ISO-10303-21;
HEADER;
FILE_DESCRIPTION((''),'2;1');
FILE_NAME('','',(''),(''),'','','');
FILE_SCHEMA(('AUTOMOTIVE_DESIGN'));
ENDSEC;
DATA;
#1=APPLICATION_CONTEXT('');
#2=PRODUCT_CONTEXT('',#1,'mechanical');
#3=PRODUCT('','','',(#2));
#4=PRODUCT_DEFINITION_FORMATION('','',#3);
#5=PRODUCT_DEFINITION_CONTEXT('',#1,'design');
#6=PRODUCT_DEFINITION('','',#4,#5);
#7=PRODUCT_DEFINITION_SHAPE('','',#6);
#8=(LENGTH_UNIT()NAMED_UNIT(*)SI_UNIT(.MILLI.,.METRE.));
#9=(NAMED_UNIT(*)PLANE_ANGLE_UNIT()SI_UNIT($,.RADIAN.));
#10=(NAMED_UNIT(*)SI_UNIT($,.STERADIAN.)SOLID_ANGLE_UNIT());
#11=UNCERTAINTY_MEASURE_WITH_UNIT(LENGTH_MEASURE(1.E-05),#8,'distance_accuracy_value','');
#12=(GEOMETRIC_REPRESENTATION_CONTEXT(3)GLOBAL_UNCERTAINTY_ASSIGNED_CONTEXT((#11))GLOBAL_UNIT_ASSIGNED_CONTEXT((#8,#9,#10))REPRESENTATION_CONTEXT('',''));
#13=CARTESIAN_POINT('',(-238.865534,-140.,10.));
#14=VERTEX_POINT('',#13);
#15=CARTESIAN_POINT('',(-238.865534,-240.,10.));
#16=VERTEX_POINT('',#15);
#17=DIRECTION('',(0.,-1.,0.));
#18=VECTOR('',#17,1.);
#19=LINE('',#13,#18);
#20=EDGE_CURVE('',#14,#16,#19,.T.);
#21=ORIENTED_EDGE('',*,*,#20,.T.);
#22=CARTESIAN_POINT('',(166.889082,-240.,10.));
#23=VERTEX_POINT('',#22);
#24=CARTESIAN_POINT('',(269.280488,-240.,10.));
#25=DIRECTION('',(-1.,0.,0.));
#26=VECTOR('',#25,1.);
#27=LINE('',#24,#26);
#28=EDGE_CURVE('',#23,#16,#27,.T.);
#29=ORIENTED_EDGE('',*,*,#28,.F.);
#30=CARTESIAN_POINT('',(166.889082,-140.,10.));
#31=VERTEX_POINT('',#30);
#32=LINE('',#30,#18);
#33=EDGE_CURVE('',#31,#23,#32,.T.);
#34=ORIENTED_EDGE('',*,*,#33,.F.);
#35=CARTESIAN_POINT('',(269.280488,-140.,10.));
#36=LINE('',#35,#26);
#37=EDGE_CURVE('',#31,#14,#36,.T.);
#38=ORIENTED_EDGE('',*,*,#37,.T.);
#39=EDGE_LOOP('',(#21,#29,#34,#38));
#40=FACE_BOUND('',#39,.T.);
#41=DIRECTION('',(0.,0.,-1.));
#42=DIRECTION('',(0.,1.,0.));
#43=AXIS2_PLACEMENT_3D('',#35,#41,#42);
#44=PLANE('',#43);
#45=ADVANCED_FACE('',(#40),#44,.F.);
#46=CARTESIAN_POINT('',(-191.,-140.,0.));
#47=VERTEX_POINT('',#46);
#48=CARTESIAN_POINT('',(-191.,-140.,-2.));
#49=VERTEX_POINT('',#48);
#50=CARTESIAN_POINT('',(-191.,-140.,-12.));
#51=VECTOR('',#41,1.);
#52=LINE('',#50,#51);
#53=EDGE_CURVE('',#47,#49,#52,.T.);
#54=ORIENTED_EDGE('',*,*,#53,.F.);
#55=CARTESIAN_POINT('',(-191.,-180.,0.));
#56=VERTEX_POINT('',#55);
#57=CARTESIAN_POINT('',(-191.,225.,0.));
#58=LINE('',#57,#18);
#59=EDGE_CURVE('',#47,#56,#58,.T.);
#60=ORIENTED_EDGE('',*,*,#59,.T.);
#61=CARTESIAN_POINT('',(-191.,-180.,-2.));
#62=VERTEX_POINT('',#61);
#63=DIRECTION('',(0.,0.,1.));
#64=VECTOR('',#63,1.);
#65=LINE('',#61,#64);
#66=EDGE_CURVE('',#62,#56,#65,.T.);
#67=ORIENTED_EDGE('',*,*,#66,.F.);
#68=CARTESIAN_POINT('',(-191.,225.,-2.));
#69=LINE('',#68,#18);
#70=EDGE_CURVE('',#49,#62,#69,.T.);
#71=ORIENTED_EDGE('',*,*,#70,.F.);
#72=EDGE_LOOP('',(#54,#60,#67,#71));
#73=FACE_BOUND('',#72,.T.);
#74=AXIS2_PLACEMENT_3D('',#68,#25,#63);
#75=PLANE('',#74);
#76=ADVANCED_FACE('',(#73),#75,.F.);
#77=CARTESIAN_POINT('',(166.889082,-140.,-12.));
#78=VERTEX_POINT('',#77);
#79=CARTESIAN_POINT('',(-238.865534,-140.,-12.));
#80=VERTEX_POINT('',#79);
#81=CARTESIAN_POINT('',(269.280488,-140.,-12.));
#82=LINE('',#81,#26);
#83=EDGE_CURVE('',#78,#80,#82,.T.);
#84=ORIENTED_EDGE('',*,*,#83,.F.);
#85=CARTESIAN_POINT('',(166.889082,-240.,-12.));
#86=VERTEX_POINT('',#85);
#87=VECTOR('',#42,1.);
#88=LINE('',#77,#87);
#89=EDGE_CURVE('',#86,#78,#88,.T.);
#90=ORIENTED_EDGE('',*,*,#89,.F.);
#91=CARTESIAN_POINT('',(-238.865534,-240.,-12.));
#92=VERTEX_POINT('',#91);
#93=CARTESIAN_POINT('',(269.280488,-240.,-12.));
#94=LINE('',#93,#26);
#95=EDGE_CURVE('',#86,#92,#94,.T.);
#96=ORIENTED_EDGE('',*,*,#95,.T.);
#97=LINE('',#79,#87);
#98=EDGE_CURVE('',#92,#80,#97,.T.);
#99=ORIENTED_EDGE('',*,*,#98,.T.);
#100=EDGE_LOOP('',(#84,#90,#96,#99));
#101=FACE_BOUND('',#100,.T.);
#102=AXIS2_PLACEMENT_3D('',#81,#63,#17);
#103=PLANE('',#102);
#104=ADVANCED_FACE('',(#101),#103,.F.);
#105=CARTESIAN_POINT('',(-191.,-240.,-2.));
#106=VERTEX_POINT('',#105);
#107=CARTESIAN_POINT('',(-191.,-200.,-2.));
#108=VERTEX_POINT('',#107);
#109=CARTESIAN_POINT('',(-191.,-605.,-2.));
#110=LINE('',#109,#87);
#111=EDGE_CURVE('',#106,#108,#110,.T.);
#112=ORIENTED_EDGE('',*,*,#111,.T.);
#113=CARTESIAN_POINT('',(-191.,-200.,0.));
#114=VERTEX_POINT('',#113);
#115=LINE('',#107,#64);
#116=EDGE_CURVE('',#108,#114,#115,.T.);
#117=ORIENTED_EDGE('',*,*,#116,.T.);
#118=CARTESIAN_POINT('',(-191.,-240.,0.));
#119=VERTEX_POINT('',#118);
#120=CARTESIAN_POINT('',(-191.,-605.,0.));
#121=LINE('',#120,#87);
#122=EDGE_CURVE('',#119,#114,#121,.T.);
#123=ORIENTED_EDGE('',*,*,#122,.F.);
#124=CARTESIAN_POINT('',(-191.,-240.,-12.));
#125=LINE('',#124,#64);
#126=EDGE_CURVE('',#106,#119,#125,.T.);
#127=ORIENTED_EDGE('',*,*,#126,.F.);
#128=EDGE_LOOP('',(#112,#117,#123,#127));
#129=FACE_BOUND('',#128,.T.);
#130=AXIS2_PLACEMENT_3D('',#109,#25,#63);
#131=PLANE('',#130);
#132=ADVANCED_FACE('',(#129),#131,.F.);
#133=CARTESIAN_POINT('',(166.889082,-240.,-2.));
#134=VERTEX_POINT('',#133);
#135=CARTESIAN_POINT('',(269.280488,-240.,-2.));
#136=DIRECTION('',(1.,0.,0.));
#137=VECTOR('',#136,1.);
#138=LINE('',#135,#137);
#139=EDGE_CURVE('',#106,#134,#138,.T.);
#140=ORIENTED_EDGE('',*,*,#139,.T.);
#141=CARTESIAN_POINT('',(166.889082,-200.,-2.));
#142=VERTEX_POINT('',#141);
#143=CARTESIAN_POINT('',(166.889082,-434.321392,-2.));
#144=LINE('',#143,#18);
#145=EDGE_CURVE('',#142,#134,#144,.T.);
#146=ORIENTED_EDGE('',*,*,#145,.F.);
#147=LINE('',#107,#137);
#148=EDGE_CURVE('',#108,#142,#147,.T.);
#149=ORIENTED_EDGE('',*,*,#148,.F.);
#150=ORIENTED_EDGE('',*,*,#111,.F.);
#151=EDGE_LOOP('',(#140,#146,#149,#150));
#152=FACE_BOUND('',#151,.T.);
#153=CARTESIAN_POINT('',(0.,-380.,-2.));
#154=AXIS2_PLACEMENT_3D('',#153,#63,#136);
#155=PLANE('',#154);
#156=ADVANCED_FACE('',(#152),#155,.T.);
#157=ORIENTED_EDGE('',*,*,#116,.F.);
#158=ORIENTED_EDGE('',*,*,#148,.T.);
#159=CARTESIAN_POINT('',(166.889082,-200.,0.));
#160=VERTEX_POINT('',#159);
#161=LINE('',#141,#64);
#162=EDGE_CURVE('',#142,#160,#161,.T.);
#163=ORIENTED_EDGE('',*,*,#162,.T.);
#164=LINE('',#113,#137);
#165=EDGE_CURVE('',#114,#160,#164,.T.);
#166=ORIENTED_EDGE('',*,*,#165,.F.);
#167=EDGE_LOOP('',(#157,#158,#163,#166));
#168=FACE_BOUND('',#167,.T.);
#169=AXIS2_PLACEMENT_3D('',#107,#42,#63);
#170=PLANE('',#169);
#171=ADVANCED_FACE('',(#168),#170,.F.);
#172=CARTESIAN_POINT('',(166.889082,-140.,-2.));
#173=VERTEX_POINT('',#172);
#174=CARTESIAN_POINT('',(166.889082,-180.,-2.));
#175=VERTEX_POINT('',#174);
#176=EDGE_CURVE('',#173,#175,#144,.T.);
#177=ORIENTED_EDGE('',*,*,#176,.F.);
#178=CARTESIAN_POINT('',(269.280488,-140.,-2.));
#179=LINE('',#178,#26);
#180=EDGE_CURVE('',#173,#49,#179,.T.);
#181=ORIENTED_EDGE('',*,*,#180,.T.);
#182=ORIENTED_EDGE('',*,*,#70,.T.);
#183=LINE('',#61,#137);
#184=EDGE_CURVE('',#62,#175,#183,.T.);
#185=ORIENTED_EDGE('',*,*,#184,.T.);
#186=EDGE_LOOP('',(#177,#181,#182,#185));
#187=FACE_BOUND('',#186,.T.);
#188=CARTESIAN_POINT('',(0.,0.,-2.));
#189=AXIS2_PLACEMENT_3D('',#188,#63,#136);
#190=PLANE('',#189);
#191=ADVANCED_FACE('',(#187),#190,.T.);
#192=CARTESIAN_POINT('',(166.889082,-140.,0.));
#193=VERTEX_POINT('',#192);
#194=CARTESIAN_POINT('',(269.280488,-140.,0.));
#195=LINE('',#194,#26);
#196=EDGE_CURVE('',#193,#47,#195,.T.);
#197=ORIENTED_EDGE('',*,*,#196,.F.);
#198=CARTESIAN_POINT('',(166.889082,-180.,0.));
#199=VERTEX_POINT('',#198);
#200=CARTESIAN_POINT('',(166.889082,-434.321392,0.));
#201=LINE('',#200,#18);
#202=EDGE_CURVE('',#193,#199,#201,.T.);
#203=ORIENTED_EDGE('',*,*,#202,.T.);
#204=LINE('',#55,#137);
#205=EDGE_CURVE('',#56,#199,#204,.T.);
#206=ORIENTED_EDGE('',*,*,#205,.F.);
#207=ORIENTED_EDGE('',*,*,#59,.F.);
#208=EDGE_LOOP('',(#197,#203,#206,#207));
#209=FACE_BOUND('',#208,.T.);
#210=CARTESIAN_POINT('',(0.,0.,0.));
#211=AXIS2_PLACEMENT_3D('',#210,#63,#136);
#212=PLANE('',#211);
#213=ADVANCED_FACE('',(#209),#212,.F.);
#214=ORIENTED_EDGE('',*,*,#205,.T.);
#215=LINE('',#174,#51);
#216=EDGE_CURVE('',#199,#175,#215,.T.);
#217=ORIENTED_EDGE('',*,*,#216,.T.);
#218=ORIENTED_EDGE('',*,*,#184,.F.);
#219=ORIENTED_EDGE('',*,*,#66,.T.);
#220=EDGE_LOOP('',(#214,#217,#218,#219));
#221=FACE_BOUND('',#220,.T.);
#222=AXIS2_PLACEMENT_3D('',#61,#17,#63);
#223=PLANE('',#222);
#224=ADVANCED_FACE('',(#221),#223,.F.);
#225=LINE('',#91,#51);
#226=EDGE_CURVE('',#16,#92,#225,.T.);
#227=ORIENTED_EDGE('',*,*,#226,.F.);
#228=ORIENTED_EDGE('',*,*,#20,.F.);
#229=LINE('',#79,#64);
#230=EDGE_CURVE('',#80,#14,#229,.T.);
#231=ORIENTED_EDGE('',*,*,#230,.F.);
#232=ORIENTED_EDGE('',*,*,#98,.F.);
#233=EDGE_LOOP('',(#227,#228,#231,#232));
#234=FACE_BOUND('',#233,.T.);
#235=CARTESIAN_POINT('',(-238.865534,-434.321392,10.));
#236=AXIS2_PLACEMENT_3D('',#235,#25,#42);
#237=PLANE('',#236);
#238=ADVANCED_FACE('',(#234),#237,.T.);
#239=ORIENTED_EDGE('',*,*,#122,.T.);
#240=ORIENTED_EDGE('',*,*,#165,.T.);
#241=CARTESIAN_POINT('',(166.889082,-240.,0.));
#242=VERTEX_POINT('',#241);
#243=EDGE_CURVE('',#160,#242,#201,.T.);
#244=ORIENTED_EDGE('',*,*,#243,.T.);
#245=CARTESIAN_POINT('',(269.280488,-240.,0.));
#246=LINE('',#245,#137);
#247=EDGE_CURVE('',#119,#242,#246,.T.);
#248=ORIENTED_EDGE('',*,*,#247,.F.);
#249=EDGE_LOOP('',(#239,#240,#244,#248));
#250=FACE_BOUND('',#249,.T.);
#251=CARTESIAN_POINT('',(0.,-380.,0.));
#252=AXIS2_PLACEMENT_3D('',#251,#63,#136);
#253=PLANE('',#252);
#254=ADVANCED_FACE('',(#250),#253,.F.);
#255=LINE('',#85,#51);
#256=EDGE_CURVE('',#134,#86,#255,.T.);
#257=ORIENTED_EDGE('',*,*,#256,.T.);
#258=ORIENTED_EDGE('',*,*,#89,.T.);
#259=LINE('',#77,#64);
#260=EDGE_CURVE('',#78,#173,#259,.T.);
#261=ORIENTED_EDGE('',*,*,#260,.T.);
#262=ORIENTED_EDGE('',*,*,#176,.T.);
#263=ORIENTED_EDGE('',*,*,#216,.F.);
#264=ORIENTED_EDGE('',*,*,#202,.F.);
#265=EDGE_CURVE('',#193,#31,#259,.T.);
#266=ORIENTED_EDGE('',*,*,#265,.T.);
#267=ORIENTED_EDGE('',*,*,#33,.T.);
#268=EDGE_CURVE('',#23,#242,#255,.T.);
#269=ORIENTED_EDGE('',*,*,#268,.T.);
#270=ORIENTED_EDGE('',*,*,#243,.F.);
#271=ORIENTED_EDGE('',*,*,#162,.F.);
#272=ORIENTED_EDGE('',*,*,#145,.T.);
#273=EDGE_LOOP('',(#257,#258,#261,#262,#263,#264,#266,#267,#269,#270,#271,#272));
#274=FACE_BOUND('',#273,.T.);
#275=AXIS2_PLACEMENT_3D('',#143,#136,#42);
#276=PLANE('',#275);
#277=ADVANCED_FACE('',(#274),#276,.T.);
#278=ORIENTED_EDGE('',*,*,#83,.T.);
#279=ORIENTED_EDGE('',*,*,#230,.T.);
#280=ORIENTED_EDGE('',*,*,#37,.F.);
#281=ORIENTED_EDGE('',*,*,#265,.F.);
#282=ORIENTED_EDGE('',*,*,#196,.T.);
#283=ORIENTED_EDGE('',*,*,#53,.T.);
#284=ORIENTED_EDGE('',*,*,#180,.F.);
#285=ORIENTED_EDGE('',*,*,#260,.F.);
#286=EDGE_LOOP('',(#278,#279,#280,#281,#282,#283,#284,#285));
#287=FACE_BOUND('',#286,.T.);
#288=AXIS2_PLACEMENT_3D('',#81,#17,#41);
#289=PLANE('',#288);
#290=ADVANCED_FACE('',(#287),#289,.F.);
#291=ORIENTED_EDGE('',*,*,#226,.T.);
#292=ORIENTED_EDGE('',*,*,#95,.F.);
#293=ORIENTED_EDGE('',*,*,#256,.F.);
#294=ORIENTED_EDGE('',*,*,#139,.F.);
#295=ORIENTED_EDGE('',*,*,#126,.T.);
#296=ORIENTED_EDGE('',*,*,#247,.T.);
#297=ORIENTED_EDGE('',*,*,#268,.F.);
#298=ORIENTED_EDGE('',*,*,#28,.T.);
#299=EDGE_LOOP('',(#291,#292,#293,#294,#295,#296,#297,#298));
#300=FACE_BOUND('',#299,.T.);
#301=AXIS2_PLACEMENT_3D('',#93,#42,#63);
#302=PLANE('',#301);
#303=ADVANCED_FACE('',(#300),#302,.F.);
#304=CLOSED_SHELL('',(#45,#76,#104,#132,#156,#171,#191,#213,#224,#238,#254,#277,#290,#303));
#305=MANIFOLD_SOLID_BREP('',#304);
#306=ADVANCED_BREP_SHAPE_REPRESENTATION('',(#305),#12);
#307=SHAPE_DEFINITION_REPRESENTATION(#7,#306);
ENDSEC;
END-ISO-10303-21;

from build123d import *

# Parameters (mm, degrees)
BOSS_EXTRUDE1_DEPTH      = 166.889082
BOSS_EXTRUDE1_DEPTH_BACK = 238.865534
SKETCH1_W                = 22
SKETCH1_H                = 100
CAVITY1_START            = -191
CAVITY1_OUTLINE_W        = 40
CAVITY1_OUTLINE_H        = 2
CAVITY1_DEPTH            = 357.889082162


# Read off the part's stored shape, not the designer's step: Cavity1
with BuildPart() as part:
    # Sketch1 → Boss-Extrude1 (new, two sides: drawn at the far end of the back side and taken through both)
    with BuildSketch(Plane(origin=(0, 0, 0), x_dir=(0, 0, -1), z_dir=(1, 0, 0)).offset(-BOSS_EXTRUDE1_DEPTH_BACK)):
        with Locations((1, -190)):
            Rectangle(SKETCH1_W, SKETCH1_H)
    extrude(amount=BOSS_EXTRUDE1_DEPTH + BOSS_EXTRUDE1_DEPTH_BACK)

    # Cavity1 outline → Cavity1 (cut)
    with BuildSketch(Plane.YZ.offset(CAVITY1_START)):
        with Locations((-160, -1)):
            Rectangle(CAVITY1_OUTLINE_W, CAVITY1_OUTLINE_H)
    cavity1 = extrude(amount=CAVITY1_DEPTH, mode=Mode.SUBTRACT)

    # Mirror1: Cavity1 across plane
    add(cavity1.mirror(Plane.ZX.offset(-190)), mode=Mode.SUBTRACT)


solid = part.part
